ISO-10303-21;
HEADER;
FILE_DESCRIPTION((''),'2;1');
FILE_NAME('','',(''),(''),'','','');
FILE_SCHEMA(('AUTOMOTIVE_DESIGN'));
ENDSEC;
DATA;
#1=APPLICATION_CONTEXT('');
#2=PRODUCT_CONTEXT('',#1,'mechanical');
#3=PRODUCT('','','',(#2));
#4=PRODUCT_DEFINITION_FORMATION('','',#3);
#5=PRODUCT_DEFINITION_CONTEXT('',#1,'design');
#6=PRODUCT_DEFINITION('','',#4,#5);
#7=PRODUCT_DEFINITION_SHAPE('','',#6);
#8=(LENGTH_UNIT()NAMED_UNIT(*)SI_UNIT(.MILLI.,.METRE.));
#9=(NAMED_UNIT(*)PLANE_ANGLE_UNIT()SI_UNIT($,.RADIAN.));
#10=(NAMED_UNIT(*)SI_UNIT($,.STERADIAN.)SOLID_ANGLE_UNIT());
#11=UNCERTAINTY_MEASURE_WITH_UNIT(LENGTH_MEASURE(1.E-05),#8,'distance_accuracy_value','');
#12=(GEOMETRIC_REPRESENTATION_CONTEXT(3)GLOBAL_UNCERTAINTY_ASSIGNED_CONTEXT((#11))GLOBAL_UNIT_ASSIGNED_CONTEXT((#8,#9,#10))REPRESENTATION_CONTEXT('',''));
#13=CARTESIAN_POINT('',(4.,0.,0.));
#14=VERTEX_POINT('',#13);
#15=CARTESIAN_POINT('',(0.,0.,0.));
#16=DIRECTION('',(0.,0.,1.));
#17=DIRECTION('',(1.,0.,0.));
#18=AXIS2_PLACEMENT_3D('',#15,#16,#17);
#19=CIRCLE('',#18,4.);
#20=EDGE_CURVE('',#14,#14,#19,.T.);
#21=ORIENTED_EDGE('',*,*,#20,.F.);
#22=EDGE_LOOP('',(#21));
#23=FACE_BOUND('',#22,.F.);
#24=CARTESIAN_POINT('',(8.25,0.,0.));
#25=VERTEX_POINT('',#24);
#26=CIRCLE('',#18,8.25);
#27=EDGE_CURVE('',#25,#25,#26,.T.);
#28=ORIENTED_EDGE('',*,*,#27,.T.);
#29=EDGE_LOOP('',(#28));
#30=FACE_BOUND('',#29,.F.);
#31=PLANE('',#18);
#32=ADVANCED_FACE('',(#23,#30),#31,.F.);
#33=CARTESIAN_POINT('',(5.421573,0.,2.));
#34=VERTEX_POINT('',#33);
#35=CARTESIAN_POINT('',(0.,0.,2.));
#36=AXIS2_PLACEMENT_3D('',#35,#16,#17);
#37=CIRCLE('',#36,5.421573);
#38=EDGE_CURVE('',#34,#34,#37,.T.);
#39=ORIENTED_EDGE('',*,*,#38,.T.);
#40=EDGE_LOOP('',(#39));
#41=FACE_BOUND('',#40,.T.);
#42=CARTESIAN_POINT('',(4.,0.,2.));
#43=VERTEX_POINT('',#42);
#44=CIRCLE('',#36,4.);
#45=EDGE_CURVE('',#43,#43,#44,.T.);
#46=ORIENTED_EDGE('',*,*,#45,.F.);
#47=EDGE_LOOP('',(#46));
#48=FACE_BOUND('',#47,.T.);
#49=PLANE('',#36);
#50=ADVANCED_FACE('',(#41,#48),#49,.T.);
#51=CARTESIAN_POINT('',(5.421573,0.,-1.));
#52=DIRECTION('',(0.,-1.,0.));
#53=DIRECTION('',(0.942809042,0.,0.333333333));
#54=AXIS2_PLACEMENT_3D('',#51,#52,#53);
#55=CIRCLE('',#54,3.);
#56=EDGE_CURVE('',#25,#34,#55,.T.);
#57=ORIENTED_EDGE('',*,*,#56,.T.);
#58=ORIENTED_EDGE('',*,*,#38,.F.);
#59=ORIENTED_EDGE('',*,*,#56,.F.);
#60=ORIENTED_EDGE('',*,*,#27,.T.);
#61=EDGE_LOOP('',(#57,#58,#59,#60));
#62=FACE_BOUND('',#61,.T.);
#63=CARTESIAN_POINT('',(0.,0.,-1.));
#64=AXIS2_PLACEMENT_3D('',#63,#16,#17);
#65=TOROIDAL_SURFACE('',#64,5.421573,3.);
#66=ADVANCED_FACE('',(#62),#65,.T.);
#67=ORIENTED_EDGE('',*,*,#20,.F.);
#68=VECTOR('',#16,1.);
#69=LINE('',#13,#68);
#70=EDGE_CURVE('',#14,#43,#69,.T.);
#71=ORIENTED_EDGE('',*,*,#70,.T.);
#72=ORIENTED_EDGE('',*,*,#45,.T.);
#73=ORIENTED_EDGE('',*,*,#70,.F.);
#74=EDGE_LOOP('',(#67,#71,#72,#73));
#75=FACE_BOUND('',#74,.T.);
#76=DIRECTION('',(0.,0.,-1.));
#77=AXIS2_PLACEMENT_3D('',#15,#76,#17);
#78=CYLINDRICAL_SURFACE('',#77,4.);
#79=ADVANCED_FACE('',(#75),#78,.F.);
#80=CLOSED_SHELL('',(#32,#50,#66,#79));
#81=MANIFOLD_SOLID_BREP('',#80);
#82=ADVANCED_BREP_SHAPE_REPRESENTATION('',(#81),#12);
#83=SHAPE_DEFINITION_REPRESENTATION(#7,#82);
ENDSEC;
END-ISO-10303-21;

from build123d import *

# Parameters (mm, degrees)
F0_R     = 8.25
F0_R_2   = 4
F1_DEPTH = 2
F2_DEPTH = 2


# Not quite as in the source:
# - a fillet or chamfer that OpenCascade refuses, or shapes differently, is made with other operations: its cross-section is extruded or revolved along the edge and cut away or added


with BuildPart() as f1:
    # F0 (on Top) → F1 (new body)
    with BuildSketch(Plane.XY):
        Circle(F0_R)
        Circle(F0_R_2, mode=Mode.SUBTRACT)
        Circle(F0_R_2)
    extrude(amount=F1_DEPTH)

    # F0 (on Top) → F2 (cut, through all)
    with BuildSketch(Plane.XY):
        Circle(F0_R_2)
    extrude(amount=F2_DEPTH, mode=Mode.SUBTRACT)

    # F3: fillet of radius 3 on 1 edges, made by hand

    # F3_s1 → F3_t2 (revolve, cut)
    with BuildSketch(Plane.XZ):
        with BuildLine():
            ThreePointArc((8.25, 0), (7.1536236828, 1.4494897428), (5.4215728753, 2))
            Line((5.4215728753, 2), (8.25, 2))
            Line((8.25, 2), (8.25, 0))
        make_face()
    revolve(axis=Axis((0, 0, 2), (0, 0, 1)), mode=Mode.SUBTRACT)


solid = f1.part
